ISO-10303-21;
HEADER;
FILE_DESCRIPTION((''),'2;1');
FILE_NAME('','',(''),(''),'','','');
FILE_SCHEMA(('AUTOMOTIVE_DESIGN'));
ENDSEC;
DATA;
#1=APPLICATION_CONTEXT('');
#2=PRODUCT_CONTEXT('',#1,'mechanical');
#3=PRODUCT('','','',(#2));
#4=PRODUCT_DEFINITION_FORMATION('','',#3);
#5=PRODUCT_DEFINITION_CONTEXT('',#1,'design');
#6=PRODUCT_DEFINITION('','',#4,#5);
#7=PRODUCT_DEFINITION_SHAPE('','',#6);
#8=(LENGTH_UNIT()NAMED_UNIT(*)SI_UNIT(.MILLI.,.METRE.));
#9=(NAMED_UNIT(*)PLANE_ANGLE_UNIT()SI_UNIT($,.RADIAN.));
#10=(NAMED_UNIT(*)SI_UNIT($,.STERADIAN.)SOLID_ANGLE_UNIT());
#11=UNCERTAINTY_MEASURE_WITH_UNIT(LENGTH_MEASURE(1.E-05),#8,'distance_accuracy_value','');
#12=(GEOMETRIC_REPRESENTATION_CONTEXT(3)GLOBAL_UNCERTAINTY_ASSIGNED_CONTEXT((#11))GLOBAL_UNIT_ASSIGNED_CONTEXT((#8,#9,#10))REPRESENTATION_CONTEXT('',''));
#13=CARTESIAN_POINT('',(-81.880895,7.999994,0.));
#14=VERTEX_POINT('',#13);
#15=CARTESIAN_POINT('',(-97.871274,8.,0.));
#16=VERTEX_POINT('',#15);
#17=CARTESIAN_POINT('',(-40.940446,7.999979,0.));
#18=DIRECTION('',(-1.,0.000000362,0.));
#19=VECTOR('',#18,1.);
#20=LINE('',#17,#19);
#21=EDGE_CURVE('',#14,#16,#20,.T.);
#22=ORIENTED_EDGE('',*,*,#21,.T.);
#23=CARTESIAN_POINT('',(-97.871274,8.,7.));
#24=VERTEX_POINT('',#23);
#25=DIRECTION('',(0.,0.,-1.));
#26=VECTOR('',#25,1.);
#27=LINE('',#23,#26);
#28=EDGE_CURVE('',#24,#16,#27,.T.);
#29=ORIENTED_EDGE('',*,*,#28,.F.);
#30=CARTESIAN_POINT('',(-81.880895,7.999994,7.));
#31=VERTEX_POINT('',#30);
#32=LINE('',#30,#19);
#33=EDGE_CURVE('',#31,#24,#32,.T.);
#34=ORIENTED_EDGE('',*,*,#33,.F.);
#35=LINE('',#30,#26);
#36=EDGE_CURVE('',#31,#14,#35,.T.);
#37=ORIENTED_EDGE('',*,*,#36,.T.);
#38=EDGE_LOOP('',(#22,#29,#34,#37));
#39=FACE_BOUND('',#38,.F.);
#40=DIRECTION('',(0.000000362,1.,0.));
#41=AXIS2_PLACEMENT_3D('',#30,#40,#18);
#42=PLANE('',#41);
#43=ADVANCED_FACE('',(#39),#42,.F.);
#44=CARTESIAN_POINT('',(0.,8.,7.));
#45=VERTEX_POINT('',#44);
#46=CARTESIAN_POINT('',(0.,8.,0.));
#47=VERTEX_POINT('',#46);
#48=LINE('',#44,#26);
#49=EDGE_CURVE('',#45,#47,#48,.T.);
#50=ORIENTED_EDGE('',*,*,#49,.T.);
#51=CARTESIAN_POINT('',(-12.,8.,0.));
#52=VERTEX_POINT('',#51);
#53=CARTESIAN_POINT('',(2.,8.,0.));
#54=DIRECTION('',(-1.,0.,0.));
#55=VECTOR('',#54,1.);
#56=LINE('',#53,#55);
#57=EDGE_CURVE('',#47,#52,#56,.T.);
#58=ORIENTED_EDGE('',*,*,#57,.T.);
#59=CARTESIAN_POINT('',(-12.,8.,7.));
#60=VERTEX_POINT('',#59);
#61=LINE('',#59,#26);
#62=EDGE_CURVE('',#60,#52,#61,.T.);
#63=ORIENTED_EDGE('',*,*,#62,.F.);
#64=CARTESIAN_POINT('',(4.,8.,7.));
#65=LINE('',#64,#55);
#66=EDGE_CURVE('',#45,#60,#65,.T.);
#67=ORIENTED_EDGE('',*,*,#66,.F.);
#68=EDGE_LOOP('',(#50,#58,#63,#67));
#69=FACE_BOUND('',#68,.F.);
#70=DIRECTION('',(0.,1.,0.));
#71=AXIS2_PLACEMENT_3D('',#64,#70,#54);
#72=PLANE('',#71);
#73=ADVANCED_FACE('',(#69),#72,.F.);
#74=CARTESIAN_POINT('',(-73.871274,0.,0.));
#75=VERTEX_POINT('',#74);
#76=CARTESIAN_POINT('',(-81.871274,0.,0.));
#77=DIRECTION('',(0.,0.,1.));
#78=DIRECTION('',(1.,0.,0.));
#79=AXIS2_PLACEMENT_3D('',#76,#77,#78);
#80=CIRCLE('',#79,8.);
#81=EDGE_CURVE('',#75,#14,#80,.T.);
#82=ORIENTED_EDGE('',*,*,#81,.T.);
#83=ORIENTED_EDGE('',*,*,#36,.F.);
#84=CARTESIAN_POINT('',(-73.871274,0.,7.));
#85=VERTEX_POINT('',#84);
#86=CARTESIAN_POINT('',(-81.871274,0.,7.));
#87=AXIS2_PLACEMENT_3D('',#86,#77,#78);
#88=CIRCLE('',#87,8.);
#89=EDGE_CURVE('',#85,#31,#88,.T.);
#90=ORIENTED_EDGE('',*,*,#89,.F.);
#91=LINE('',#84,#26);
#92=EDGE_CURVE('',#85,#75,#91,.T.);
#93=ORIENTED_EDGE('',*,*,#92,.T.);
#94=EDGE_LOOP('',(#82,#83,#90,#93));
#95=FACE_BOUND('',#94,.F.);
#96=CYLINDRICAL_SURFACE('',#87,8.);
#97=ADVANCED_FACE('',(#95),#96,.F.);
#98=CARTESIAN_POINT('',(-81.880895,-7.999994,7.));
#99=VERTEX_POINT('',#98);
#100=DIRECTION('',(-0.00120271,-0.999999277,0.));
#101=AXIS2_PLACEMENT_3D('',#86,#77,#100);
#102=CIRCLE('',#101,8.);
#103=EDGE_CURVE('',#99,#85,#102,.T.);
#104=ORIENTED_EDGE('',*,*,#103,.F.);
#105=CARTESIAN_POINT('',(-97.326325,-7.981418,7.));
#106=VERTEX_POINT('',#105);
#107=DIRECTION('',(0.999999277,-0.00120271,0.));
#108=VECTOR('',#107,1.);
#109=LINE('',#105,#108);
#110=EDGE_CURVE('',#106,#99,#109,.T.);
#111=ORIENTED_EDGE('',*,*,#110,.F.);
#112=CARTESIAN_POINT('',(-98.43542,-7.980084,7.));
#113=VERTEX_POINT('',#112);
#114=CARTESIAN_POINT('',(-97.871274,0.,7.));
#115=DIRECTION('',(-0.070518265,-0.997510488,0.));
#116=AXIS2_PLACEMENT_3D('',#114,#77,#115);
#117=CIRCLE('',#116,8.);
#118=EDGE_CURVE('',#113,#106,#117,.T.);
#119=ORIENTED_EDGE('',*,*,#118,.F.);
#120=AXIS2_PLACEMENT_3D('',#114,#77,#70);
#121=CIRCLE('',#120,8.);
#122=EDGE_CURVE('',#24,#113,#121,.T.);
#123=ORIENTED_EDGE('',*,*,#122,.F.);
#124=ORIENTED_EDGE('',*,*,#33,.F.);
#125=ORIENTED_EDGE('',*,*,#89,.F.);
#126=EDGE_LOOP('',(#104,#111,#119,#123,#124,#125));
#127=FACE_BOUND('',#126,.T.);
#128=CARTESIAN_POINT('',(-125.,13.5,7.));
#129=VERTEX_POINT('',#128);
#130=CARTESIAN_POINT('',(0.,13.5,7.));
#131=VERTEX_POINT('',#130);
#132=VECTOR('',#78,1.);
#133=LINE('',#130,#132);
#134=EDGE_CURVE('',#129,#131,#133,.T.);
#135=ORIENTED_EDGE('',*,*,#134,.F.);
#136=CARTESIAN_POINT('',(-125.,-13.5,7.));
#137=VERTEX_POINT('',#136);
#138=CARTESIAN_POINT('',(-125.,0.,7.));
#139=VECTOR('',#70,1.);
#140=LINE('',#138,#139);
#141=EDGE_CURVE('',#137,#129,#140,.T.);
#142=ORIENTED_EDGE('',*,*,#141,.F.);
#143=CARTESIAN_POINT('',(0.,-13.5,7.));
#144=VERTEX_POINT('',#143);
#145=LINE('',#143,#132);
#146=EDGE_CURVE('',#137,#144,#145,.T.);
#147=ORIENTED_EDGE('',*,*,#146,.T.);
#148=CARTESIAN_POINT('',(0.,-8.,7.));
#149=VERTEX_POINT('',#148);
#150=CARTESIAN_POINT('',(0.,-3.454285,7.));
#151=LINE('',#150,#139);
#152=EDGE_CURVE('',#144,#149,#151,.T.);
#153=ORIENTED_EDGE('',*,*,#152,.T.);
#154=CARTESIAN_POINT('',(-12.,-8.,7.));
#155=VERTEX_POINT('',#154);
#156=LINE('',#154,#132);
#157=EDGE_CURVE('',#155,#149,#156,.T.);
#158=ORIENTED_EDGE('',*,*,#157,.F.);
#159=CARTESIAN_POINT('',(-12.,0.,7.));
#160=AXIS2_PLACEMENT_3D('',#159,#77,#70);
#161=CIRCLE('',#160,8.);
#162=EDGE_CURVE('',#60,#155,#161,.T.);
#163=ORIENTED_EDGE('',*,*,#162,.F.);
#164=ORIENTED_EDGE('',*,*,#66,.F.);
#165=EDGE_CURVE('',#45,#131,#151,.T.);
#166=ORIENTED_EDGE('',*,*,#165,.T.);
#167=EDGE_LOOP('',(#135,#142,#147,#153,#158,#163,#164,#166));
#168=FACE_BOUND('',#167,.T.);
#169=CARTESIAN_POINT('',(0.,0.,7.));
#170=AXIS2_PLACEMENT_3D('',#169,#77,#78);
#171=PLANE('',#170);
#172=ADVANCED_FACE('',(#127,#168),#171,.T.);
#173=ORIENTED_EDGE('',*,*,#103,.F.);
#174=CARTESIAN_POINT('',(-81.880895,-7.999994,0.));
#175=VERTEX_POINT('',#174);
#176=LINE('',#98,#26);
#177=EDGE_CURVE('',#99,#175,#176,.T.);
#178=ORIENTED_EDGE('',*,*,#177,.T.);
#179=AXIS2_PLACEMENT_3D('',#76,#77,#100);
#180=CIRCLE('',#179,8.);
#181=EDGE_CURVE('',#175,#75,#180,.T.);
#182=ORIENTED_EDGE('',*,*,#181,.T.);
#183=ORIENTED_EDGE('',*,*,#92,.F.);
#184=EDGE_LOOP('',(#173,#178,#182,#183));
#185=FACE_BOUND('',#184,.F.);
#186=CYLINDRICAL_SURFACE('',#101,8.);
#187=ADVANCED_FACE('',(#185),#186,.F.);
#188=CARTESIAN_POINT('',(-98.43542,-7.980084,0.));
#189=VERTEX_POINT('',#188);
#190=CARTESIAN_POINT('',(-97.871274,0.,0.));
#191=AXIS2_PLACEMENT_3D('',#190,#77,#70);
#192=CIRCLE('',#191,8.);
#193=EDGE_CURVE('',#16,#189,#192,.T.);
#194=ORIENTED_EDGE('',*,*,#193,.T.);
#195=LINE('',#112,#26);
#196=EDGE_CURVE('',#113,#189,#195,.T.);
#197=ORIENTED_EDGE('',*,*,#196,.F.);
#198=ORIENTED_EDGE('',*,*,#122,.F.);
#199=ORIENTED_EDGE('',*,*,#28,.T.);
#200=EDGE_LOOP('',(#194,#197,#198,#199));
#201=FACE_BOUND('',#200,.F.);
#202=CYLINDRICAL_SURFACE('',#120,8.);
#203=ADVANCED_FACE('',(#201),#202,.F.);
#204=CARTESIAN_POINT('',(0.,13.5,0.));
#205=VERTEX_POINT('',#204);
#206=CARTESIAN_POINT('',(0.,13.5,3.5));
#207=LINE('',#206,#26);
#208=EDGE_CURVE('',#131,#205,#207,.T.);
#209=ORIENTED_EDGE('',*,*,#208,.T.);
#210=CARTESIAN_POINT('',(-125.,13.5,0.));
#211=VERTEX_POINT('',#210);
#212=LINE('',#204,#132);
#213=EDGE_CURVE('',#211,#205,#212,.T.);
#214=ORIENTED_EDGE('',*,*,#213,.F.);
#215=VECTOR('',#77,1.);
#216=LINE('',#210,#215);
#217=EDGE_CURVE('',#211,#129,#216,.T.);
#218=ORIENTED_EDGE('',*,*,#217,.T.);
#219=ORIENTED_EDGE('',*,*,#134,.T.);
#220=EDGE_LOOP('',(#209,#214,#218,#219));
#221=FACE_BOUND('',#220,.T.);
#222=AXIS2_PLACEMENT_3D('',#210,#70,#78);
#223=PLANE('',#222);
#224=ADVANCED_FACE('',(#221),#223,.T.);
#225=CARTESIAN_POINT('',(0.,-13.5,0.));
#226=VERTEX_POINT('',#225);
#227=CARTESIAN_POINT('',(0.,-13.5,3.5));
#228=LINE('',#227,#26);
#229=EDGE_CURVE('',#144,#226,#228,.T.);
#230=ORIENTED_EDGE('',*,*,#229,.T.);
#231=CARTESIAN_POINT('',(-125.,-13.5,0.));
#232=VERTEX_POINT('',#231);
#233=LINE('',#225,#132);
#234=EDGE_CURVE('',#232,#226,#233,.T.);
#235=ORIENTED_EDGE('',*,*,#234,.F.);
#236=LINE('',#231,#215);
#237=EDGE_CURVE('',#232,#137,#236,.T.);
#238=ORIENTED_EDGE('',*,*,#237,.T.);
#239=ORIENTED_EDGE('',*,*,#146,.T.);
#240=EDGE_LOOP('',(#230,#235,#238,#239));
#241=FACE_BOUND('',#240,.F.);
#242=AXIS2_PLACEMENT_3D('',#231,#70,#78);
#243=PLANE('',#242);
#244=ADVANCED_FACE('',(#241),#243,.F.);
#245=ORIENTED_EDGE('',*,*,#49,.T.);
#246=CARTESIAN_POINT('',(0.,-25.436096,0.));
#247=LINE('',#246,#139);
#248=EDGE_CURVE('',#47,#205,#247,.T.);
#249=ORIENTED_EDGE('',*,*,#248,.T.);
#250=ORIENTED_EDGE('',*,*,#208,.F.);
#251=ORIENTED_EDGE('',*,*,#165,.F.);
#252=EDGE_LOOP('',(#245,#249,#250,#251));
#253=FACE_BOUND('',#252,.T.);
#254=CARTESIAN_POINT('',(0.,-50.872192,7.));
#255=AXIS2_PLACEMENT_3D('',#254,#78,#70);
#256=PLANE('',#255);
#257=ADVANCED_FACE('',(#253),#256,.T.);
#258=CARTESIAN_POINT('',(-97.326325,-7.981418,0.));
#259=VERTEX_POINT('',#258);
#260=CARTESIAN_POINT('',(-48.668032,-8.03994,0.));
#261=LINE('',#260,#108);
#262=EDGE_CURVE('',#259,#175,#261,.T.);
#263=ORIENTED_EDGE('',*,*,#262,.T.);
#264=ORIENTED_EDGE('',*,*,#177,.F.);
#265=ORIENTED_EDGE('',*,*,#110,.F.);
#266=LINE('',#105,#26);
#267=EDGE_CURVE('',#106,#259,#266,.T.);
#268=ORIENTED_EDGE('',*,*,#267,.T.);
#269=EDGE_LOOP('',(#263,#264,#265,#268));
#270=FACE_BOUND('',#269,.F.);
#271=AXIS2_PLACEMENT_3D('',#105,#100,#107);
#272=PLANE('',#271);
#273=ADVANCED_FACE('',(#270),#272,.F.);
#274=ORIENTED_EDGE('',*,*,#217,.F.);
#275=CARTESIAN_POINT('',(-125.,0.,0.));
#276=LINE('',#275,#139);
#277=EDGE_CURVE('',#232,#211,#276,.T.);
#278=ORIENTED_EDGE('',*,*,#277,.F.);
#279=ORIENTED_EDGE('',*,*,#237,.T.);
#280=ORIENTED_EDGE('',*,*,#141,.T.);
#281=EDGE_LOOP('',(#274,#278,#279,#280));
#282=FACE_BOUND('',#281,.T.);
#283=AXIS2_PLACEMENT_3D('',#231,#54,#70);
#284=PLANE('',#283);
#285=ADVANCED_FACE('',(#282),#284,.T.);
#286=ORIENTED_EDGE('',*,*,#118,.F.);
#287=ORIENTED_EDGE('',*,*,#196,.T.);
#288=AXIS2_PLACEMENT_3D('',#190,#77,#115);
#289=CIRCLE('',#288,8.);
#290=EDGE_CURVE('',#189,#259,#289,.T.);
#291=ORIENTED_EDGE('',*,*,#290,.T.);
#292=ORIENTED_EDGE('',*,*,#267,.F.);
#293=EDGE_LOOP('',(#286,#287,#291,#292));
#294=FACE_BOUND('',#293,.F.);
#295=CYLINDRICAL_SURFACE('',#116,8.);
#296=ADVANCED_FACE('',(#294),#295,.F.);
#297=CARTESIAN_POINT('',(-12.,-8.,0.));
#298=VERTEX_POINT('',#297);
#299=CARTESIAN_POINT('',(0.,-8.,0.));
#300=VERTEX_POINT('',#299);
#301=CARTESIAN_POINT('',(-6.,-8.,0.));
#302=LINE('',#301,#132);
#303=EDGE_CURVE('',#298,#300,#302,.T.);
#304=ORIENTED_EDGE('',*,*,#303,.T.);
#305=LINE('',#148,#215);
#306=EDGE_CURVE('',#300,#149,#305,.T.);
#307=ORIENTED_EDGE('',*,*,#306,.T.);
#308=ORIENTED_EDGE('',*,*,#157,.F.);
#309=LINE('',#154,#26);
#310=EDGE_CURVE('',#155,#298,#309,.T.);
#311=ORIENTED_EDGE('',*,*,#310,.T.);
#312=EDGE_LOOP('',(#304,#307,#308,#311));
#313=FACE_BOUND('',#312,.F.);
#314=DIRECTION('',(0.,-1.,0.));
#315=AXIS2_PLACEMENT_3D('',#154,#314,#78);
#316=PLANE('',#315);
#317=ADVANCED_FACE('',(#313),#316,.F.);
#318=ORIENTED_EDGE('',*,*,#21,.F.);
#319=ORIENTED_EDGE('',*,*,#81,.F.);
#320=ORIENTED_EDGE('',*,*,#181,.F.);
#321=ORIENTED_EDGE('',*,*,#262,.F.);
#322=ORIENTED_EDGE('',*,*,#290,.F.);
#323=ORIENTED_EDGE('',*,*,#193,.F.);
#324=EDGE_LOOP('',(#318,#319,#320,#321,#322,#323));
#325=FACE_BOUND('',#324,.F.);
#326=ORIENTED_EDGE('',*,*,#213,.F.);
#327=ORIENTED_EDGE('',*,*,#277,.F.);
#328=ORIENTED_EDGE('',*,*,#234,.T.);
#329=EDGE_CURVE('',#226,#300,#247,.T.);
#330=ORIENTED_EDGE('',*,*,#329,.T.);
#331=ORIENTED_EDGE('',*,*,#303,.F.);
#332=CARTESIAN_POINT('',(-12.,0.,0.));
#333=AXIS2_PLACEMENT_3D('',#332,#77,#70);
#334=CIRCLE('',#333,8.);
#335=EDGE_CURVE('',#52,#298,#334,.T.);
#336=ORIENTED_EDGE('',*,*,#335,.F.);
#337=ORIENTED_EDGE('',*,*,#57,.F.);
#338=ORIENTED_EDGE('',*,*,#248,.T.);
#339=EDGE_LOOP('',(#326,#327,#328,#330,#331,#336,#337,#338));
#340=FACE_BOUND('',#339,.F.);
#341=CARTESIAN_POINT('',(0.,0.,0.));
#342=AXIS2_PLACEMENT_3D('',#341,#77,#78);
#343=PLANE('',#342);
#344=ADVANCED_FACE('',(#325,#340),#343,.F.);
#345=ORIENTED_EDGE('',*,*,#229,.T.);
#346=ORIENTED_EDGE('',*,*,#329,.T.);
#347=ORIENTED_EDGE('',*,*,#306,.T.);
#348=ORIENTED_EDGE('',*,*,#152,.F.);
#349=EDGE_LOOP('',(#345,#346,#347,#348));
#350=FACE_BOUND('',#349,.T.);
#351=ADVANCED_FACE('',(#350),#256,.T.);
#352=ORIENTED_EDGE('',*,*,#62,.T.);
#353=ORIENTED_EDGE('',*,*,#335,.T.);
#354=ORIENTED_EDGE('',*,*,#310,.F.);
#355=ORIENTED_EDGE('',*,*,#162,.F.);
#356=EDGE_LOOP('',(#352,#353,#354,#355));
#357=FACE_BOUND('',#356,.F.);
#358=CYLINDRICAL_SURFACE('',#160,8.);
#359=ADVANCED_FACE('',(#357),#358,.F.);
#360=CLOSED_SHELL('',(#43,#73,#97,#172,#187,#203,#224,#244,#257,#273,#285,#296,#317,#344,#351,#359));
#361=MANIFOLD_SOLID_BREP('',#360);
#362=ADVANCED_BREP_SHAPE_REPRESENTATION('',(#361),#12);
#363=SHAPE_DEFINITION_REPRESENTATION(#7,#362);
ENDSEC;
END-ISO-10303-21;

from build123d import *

# Parameters (mm, degrees)
F0_W     = 250
F0_H     = 27
F1_DEPTH = 7
F3_DEPTH = 25
F4_W     = 125
F4_H     = 94.8358140886
F5_DEPTH = 25


# Not quite as in the source:
# - ends of sketch curves that miss each other by under 0.0002 mm in the source are joined


with BuildPart() as f1:
    # F0 (on Top) → F1 (new body)
    with BuildSketch(Plane.XY):
        Rectangle(F0_W, F0_H)
    extrude(amount=F1_DEPTH)

    # F2 (on face) → F3 (cut)
    with BuildSketch(Plane.XY.offset(7)):
        with BuildLine():
            ThreePointArc((87, -8), (92.6568542495, -5.6568542495), (95, 0))
            ThreePointArc((95, 0), (92.6568542495, 5.6568542495), (87, 8))
            ThreePointArc((87, 8), (81.3431457505, 5.6568542495), (79, 0))
            ThreePointArc((79, 0), (81.3431457505, -5.6568542495), (87, -8))
        make_face()
        with BuildLine():
            ThreePointArc((79, 0), (81.3431457505, 5.6568542495), (87, 8))
            Line((87, 8), (71, 7.999994214))
            ThreePointArc((71, 7.999994214), (76.6568542495, 5.6568542495), (79, 0))
        make_face()
        with BuildLine():
            Line((71, -7.999994214), (87, -8))
            ThreePointArc((87, -8), (81.3431457505, -5.6568542495), (79, 0))
            ThreePointArc((79, 0), (76.6568542495, -5.6568542495), (71, -7.999994214))
        make_face()
        with BuildLine():
            ThreePointArc((71, -8), (76.6568542495, -5.6568542495), (79, 0))
            ThreePointArc((79, 0), (76.6568542495, 5.6568542495), (71, 8))
            ThreePointArc((71, 8), (63, 0), (71, -8))
        make_face()
        with BuildLine():
            ThreePointArc((-12, -8), (-6.3431457505, -5.6568542495), (-4, 0))
            ThreePointArc((-4, 0), (-6.3431457505, 5.6568542495), (-12, 8))
            ThreePointArc((-12, 8), (-20, 0), (-12, -8))
        make_face()
        with BuildLine():
            ThreePointArc((4, -8), (-1.6568542495, -5.6568542495), (-4, 0))
            ThreePointArc((-4, 0), (-6.3431457505, -5.6568542495), (-12, -8))
            Line((-12, -8), (4, -8))
        make_face()
        with BuildLine():
            ThreePointArc((-12, 8), (-6.3431457505, 5.6568542495), (-4, 0))
            ThreePointArc((-4, 0), (-1.6568542495, 5.6568542495), (4, 8))
            Line((4, 8), (-12, 8))
        make_face()
        with BuildLine():
            ThreePointArc((4, 8), (-1.6568542495, 5.6568542495), (-4, 0))
            ThreePointArc((-4, 0), (-1.6568542495, -5.6568542495), (4, -8))
            ThreePointArc((4, -8), (9.6568542495, -5.6568542495), (12, 0))
            ThreePointArc((12, 0), (9.6568542495, 5.6568542495), (4, 8))
        make_face()
        with BuildLine():
            ThreePointArc((-81.8808954364, -7.999994214), (-76.2178223077, -5.660255005), (-73.871273756, 0))
            ThreePointArc((-73.871273756, 0), (-76.2178223077, 5.660255005), (-81.8808954364, 7.999994214))
            Line((-81.8808954364, 7.999994214), (-81.8808954364, -7.999994214))
        make_face()
        with BuildLine():
            Line((-81.8808954364, -7.999994214), (-81.8808954364, 7.999994214))
            ThreePointArc((-81.8808954364, 7.999994214), (-87.531528761, 5.6534514483), (-89.871273756, 0))
            ThreePointArc((-89.871273756, 0), (-87.531528761, -5.6534514483), (-81.8808954364, -7.999994214))
        make_face()
        with BuildLine():
            ThreePointArc((-89.871273756, 0), (-87.531528761, 5.6534514483), (-81.8808954364, 7.999994214))
            Line((-81.8808954364, 7.999994214), (-97.871273756, 8))
            ThreePointArc((-97.871273756, 8), (-92.2144195065, 5.6568542495), (-89.871273756, 0))
        make_face()
        with BuildLine():
            Line((-97.32632471, -7.9814178275), (-81.8808954364, -7.999994214))
            ThreePointArc((-81.8808954364, -7.999994214), (-87.531528761, -5.6534514483), (-89.871273756, 0))
            ThreePointArc((-89.871273756, 0), (-92.0249247941, -5.4607878384), (-97.32632471, -7.9814178275))
        make_face()
        with BuildLine():
            ThreePointArc((-97.32632471, -7.9814178275), (-92.0249247941, -5.4607878384), (-89.871273756, 0))
            ThreePointArc((-89.871273756, 0), (-92.2144195065, 5.6568542495), (-97.871273756, 8))
            ThreePointArc((-97.871273756, 8), (-105.8662931823, 0.2822487793), (-98.4354198745, -7.9800839066))
            Line((-98.4354198745, -7.9800839066), (-97.32632471, -7.9814178275))
        make_face()
        with BuildLine():
            ThreePointArc((-98.4354198745, -7.9800839066), (-97.8808954364, -7.999994214), (-97.32632471, -7.9814178275))
            Line((-97.32632471, -7.9814178275), (-98.4354198745, -7.9800839066))
        make_face()
    extrude(amount=-F3_DEPTH, mode=Mode.SUBTRACT)

    # F4 (on face) → F5 (cut)
    with BuildSketch(Plane.XY.offset(7)):
        with Locations((62.5, -3.4542847425)):
            Rectangle(F4_W, F4_H)
    extrude(amount=-F5_DEPTH, mode=Mode.SUBTRACT)


solid = f1.part
